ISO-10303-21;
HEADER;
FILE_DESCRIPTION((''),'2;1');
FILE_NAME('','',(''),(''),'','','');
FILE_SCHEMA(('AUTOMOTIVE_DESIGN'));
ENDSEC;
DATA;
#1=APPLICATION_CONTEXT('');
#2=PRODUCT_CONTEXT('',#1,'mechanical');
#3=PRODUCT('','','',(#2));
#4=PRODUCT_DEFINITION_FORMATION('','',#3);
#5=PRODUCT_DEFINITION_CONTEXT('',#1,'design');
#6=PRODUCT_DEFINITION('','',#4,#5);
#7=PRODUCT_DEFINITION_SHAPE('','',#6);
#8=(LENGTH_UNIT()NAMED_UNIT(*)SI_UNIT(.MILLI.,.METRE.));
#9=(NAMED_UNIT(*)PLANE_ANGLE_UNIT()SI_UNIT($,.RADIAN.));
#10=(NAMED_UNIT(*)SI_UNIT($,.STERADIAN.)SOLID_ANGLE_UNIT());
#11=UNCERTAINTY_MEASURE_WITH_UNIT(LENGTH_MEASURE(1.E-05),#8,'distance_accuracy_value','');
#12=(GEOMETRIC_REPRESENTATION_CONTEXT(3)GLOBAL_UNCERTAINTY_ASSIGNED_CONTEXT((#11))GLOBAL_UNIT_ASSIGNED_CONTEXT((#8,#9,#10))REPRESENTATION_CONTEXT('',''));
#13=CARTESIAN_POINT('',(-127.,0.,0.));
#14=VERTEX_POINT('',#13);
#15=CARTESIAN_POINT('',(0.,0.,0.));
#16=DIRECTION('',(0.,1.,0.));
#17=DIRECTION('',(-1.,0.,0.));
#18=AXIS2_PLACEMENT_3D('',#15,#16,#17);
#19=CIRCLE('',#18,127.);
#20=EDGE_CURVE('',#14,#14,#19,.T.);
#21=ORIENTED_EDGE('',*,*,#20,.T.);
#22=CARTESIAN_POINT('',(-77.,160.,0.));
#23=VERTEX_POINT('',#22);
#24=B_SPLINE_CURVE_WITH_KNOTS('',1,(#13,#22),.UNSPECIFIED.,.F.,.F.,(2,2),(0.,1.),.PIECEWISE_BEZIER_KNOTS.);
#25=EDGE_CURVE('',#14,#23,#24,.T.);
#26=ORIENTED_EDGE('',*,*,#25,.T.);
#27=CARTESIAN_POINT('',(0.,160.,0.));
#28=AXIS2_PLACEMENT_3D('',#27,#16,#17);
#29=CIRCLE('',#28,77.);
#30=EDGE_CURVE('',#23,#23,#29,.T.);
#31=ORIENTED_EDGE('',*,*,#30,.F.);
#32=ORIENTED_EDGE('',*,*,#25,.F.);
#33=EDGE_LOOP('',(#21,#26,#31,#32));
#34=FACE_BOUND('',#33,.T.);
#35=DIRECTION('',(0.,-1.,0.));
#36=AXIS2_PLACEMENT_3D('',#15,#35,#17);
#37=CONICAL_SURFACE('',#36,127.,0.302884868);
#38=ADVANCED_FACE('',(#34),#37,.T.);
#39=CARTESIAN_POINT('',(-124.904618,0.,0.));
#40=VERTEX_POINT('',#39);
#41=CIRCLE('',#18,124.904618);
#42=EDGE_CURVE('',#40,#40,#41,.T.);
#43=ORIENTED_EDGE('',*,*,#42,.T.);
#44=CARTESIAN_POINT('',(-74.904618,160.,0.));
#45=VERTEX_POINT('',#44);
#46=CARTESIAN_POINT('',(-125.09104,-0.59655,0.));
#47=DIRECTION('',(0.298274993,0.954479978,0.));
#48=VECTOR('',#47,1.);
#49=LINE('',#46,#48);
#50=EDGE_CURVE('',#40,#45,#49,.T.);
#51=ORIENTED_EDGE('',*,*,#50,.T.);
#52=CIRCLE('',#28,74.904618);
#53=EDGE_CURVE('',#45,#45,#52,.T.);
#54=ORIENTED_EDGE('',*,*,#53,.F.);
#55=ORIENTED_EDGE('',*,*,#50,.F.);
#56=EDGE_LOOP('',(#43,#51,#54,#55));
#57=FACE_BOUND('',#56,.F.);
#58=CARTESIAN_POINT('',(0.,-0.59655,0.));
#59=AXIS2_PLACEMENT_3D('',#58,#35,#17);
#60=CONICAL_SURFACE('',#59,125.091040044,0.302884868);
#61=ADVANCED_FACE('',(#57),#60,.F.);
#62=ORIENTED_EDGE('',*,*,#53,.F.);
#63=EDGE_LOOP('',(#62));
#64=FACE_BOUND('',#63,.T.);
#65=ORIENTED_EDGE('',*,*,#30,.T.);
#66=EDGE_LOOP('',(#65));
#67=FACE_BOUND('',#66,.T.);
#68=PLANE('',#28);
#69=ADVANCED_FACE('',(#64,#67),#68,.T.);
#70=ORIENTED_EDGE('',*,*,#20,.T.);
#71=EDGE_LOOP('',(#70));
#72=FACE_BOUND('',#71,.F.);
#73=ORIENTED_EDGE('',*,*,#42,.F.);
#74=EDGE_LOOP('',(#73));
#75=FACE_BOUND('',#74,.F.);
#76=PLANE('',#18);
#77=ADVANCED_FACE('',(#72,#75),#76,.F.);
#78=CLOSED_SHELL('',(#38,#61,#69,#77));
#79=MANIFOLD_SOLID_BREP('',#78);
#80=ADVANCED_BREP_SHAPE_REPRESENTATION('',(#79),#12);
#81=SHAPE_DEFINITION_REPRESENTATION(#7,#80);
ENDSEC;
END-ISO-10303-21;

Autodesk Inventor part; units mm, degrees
ref_plane "YZ Plane" through (0, 0, 0) normal (1, 0, 0) x (0, 1, 0)
ref_plane "XY Plane" through (0, 0, 0) normal (0, 0, 1) x (1, 0, 0)
sketch "Szkic6" plane through (0, 0, 0) normal (0, 1, 0) x (-1, 0, 0)
  circle A0 centre (0, 0) radius 127
  dimension "d33" = 254
ref_plane "Płaszczyzna konstrukcyjna1" through (0, 160, 0) normal (0, 1, 0) x (-1, 0, 0)
sketch "Szkic7" plane through (0, 160, 0) normal (0, 1, 0) x (-1, 0, 0)
  circle A0 centre (0, 0) radius 77
  dimension "d35" = 154
loft "Wyciągnięcie złożone1" add profiles "Szkic6", "Szkic7"
shell "Skorupa1" thickness 2 removed faces 2 at (-16.3273, 160, 22.228) at (-5.9373, 0, -40.5182)
equation "\"d33\" = OD1"
equation "\"d35\" = OD2"
equation "\"d52\" = THK"
equation "\"SzerokośćGięciaPodcięcia\" = Grubość"
equation "\"RozmiarPodcięciaNarożnika\" = 4 * Grubość"
equation "\"PromieńPrzejścia\" = PromieńGięcia"
equation "\"Rozmiar_promienia_Jacobiego\" = PromieńGięcia"
equation "\"Wielk_odstępu\" = Grubość"
equation "\"d2\" = PromieńGięcia"
equation "\"d23\" = PromieńGięcia"
equation "\"OD1\" = 254"
equation "\"OD2\" = 154"
equation "\"THK\" = 2"
equation "\"Grubość\" = 1.5"
equation "\"PromieńGięcia\" = 3"
properties part number "Redukcja symetryczna Ø254x154x2 L=160" material "304"
